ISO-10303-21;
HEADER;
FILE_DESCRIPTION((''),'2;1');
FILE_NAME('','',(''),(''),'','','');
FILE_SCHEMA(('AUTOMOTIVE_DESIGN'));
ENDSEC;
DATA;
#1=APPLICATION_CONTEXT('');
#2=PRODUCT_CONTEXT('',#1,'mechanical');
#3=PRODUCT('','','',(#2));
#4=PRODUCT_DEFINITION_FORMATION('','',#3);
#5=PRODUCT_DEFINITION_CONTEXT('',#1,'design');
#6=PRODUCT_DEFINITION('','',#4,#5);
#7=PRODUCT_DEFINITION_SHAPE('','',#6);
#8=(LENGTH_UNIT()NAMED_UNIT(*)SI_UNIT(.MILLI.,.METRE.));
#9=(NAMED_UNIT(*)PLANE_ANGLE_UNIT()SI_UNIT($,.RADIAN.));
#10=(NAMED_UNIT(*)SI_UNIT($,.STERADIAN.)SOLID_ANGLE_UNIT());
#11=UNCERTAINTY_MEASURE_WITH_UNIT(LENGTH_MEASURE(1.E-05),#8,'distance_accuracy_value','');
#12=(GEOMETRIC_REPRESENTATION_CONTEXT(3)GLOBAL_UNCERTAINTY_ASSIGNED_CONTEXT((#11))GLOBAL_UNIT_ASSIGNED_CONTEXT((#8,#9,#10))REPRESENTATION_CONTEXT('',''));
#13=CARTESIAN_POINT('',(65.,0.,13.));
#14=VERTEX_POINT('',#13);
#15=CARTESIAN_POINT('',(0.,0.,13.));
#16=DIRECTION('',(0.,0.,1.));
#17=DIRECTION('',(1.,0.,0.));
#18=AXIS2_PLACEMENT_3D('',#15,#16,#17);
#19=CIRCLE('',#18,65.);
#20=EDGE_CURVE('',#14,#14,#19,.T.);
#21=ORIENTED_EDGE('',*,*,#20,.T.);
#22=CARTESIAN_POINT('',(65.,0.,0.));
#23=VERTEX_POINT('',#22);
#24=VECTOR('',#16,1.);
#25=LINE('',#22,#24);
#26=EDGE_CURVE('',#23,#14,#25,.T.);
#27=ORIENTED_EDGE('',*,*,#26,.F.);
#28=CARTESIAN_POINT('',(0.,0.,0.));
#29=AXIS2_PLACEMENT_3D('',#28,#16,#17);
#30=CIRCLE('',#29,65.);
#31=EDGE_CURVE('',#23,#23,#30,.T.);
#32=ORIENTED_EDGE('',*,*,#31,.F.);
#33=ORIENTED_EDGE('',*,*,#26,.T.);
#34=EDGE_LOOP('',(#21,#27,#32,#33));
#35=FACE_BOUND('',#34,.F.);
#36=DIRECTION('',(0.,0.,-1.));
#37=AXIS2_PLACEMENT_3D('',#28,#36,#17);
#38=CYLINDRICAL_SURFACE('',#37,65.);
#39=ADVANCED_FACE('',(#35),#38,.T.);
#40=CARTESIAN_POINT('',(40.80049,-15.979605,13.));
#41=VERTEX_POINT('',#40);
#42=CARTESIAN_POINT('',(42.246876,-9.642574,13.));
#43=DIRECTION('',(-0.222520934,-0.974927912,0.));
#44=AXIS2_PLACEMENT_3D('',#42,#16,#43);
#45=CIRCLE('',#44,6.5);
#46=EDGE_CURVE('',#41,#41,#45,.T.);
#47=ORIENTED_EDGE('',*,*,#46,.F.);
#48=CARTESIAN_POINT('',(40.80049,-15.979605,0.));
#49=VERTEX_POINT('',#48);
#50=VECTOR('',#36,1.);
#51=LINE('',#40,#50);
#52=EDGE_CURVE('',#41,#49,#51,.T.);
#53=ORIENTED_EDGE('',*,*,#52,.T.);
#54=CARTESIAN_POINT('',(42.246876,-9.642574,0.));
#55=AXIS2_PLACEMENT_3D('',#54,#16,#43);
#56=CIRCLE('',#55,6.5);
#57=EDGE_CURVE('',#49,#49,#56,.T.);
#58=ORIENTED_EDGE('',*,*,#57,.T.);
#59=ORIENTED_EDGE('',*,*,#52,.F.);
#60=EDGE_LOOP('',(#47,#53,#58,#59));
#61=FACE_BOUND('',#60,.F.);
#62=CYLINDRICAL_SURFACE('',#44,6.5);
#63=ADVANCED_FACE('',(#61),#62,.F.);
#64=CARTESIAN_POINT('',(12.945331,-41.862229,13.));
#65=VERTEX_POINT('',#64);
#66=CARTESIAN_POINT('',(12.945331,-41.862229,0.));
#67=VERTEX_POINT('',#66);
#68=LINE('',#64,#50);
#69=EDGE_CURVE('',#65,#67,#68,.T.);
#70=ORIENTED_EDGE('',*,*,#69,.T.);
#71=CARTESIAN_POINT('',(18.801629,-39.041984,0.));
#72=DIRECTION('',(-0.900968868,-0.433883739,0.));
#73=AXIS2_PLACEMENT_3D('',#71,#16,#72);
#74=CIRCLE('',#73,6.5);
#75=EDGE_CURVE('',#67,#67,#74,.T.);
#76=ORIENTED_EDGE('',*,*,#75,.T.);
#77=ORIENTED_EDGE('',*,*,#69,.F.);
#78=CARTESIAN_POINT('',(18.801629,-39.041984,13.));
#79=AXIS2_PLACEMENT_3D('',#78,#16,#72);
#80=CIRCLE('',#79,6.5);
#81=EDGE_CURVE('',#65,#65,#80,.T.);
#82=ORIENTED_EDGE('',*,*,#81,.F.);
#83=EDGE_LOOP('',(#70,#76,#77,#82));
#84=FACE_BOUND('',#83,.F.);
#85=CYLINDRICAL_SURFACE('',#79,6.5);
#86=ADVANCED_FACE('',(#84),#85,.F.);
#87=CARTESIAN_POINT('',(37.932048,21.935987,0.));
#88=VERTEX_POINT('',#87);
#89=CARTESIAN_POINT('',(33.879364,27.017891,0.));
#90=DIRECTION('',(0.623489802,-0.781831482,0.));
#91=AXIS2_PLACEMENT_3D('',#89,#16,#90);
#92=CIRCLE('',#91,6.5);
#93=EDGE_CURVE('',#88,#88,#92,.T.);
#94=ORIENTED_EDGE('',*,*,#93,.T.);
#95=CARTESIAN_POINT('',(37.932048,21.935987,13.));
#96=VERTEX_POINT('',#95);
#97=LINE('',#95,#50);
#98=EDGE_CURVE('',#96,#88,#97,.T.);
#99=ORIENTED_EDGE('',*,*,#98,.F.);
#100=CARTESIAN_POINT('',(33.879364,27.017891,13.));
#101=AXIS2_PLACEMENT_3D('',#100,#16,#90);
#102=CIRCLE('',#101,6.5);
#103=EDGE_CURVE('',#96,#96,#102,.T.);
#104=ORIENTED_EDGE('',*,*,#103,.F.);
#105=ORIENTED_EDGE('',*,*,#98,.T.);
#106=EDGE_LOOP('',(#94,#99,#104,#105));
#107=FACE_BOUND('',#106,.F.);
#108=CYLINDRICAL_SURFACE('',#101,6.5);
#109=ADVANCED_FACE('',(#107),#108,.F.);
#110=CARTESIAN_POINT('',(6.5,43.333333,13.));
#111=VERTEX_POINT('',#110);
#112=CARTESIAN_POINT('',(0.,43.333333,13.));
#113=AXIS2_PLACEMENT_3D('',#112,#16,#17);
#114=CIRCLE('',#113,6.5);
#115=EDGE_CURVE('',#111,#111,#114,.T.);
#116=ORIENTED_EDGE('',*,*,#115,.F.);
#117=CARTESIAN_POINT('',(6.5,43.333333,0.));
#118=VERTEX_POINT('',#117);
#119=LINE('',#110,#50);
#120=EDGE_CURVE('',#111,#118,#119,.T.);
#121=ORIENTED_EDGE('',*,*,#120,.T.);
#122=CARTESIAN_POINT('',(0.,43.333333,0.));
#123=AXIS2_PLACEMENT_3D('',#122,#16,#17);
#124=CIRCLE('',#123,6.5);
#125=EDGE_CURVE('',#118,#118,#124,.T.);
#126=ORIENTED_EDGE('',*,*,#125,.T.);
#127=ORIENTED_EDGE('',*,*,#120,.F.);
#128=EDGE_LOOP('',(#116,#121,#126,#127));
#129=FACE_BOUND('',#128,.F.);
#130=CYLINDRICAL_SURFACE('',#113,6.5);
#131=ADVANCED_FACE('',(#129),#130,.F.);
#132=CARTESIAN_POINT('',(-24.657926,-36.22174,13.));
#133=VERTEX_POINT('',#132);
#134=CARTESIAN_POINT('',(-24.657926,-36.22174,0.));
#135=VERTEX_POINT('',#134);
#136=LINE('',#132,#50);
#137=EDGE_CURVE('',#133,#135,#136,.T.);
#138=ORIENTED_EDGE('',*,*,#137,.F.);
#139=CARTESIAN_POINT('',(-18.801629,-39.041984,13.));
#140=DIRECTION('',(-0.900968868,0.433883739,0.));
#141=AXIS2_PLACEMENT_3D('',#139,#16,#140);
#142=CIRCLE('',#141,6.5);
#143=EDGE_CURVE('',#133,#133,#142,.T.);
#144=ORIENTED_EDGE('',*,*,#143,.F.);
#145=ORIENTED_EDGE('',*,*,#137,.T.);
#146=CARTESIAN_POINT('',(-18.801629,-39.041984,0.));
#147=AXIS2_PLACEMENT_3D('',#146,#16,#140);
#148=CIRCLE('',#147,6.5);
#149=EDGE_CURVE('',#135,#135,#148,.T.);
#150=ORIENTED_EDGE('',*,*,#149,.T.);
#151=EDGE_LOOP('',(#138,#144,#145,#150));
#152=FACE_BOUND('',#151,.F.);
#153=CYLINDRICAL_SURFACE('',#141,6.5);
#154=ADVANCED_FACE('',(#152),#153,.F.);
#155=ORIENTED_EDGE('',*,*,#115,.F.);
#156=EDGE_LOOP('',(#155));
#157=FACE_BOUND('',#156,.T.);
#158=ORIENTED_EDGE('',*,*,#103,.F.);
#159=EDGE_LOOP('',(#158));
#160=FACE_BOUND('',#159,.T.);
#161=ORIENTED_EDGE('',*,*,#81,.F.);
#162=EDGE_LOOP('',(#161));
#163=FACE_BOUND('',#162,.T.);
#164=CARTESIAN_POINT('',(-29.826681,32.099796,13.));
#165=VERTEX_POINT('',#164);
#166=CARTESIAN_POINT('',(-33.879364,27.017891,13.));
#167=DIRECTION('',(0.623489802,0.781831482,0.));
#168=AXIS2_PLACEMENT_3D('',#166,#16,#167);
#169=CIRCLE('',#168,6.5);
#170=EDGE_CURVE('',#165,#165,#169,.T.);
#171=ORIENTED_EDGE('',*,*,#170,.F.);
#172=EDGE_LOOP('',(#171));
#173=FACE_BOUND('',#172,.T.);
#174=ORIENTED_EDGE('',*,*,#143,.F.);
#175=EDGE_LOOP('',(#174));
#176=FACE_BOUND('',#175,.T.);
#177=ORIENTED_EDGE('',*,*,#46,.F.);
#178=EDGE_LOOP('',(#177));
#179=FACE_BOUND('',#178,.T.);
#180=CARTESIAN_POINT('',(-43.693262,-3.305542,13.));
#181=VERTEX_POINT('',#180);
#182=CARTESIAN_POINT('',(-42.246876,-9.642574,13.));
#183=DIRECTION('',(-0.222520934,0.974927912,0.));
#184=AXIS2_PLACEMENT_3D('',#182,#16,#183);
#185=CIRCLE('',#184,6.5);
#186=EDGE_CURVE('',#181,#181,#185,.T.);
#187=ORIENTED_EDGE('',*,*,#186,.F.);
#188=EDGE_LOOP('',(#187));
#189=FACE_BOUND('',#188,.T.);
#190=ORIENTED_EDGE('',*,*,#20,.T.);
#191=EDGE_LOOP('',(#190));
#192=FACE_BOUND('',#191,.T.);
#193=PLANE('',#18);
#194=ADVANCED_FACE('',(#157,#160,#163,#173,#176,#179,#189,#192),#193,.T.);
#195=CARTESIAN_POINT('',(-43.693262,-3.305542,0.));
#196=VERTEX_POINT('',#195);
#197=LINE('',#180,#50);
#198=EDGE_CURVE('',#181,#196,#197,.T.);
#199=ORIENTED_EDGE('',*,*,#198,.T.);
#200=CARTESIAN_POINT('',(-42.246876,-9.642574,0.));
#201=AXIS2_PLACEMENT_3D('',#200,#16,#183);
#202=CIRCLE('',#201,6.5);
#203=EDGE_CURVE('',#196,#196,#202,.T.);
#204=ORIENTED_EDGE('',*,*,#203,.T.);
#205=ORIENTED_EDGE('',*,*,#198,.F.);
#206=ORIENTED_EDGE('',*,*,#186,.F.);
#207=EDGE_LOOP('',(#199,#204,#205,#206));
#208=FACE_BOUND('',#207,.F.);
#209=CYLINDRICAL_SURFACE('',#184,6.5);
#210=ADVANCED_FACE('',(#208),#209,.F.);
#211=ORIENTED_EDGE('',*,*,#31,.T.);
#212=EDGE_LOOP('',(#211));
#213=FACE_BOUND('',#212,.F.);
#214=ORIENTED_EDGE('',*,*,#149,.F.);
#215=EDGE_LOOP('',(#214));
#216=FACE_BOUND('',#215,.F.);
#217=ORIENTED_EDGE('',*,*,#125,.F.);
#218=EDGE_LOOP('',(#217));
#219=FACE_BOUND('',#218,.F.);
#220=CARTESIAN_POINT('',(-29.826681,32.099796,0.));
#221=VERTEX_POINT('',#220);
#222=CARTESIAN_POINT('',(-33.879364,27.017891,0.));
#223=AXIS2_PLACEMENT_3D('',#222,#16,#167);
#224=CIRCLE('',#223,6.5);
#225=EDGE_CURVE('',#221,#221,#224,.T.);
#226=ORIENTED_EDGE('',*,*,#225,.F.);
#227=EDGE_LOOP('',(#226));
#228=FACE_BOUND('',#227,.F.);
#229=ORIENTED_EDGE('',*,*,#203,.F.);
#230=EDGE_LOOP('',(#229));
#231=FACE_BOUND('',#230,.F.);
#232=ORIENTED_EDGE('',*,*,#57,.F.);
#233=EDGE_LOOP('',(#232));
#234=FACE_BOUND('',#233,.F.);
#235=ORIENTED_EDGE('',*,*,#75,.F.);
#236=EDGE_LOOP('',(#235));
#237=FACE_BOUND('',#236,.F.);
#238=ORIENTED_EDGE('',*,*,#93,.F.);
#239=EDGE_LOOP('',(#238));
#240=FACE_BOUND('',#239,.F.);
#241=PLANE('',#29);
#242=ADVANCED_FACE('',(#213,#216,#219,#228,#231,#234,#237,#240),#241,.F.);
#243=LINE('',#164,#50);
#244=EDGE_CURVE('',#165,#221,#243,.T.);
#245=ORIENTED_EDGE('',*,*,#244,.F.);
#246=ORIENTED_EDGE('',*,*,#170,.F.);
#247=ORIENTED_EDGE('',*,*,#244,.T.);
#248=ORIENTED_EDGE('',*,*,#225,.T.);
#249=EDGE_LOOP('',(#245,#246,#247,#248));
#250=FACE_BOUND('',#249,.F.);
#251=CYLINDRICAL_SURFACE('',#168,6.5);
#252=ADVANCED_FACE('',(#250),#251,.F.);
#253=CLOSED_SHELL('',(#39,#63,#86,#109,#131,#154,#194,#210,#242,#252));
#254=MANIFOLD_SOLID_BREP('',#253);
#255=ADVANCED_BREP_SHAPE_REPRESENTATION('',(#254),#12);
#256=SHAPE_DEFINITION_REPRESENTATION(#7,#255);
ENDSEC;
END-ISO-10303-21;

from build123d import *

# Parameters (mm, degrees)
F2_R            = 65
F3_DEPTH        = 13
F4_R            = 6.5
F5_DEPTH        = 13.001
F5_COPIES_COUNT = 7


# Not quite as in the source:
# - a pattern or mirror of a feature is missing from the dataset's text; its kind, count and spacing are read off the source's solid


with BuildPart() as f3:
    # F2 (on Top) → F3 (new body)
    with BuildSketch(Plane.XY):
        Circle(F2_R)
    extrude(amount=F3_DEPTH)

    # F4 (on face) → F5 (cut, through all)
    with BuildSketch(Plane.XY.offset(13)):
        with Locations((0, 43.3333333333)):
            Circle(F4_R)
    f5 = extrude(amount=-F5_DEPTH, mode=Mode.SUBTRACT)

    # F5_copies: F5 ×7 about axis
    f5_copies_axis = Axis((0, 0, 0), (0, 0, 1))
    for i in range(1, F5_COPIES_COUNT):
        add(f5.rotate(f5_copies_axis, i * 360 / F5_COPIES_COUNT), mode=Mode.SUBTRACT)


solid = f3.part
